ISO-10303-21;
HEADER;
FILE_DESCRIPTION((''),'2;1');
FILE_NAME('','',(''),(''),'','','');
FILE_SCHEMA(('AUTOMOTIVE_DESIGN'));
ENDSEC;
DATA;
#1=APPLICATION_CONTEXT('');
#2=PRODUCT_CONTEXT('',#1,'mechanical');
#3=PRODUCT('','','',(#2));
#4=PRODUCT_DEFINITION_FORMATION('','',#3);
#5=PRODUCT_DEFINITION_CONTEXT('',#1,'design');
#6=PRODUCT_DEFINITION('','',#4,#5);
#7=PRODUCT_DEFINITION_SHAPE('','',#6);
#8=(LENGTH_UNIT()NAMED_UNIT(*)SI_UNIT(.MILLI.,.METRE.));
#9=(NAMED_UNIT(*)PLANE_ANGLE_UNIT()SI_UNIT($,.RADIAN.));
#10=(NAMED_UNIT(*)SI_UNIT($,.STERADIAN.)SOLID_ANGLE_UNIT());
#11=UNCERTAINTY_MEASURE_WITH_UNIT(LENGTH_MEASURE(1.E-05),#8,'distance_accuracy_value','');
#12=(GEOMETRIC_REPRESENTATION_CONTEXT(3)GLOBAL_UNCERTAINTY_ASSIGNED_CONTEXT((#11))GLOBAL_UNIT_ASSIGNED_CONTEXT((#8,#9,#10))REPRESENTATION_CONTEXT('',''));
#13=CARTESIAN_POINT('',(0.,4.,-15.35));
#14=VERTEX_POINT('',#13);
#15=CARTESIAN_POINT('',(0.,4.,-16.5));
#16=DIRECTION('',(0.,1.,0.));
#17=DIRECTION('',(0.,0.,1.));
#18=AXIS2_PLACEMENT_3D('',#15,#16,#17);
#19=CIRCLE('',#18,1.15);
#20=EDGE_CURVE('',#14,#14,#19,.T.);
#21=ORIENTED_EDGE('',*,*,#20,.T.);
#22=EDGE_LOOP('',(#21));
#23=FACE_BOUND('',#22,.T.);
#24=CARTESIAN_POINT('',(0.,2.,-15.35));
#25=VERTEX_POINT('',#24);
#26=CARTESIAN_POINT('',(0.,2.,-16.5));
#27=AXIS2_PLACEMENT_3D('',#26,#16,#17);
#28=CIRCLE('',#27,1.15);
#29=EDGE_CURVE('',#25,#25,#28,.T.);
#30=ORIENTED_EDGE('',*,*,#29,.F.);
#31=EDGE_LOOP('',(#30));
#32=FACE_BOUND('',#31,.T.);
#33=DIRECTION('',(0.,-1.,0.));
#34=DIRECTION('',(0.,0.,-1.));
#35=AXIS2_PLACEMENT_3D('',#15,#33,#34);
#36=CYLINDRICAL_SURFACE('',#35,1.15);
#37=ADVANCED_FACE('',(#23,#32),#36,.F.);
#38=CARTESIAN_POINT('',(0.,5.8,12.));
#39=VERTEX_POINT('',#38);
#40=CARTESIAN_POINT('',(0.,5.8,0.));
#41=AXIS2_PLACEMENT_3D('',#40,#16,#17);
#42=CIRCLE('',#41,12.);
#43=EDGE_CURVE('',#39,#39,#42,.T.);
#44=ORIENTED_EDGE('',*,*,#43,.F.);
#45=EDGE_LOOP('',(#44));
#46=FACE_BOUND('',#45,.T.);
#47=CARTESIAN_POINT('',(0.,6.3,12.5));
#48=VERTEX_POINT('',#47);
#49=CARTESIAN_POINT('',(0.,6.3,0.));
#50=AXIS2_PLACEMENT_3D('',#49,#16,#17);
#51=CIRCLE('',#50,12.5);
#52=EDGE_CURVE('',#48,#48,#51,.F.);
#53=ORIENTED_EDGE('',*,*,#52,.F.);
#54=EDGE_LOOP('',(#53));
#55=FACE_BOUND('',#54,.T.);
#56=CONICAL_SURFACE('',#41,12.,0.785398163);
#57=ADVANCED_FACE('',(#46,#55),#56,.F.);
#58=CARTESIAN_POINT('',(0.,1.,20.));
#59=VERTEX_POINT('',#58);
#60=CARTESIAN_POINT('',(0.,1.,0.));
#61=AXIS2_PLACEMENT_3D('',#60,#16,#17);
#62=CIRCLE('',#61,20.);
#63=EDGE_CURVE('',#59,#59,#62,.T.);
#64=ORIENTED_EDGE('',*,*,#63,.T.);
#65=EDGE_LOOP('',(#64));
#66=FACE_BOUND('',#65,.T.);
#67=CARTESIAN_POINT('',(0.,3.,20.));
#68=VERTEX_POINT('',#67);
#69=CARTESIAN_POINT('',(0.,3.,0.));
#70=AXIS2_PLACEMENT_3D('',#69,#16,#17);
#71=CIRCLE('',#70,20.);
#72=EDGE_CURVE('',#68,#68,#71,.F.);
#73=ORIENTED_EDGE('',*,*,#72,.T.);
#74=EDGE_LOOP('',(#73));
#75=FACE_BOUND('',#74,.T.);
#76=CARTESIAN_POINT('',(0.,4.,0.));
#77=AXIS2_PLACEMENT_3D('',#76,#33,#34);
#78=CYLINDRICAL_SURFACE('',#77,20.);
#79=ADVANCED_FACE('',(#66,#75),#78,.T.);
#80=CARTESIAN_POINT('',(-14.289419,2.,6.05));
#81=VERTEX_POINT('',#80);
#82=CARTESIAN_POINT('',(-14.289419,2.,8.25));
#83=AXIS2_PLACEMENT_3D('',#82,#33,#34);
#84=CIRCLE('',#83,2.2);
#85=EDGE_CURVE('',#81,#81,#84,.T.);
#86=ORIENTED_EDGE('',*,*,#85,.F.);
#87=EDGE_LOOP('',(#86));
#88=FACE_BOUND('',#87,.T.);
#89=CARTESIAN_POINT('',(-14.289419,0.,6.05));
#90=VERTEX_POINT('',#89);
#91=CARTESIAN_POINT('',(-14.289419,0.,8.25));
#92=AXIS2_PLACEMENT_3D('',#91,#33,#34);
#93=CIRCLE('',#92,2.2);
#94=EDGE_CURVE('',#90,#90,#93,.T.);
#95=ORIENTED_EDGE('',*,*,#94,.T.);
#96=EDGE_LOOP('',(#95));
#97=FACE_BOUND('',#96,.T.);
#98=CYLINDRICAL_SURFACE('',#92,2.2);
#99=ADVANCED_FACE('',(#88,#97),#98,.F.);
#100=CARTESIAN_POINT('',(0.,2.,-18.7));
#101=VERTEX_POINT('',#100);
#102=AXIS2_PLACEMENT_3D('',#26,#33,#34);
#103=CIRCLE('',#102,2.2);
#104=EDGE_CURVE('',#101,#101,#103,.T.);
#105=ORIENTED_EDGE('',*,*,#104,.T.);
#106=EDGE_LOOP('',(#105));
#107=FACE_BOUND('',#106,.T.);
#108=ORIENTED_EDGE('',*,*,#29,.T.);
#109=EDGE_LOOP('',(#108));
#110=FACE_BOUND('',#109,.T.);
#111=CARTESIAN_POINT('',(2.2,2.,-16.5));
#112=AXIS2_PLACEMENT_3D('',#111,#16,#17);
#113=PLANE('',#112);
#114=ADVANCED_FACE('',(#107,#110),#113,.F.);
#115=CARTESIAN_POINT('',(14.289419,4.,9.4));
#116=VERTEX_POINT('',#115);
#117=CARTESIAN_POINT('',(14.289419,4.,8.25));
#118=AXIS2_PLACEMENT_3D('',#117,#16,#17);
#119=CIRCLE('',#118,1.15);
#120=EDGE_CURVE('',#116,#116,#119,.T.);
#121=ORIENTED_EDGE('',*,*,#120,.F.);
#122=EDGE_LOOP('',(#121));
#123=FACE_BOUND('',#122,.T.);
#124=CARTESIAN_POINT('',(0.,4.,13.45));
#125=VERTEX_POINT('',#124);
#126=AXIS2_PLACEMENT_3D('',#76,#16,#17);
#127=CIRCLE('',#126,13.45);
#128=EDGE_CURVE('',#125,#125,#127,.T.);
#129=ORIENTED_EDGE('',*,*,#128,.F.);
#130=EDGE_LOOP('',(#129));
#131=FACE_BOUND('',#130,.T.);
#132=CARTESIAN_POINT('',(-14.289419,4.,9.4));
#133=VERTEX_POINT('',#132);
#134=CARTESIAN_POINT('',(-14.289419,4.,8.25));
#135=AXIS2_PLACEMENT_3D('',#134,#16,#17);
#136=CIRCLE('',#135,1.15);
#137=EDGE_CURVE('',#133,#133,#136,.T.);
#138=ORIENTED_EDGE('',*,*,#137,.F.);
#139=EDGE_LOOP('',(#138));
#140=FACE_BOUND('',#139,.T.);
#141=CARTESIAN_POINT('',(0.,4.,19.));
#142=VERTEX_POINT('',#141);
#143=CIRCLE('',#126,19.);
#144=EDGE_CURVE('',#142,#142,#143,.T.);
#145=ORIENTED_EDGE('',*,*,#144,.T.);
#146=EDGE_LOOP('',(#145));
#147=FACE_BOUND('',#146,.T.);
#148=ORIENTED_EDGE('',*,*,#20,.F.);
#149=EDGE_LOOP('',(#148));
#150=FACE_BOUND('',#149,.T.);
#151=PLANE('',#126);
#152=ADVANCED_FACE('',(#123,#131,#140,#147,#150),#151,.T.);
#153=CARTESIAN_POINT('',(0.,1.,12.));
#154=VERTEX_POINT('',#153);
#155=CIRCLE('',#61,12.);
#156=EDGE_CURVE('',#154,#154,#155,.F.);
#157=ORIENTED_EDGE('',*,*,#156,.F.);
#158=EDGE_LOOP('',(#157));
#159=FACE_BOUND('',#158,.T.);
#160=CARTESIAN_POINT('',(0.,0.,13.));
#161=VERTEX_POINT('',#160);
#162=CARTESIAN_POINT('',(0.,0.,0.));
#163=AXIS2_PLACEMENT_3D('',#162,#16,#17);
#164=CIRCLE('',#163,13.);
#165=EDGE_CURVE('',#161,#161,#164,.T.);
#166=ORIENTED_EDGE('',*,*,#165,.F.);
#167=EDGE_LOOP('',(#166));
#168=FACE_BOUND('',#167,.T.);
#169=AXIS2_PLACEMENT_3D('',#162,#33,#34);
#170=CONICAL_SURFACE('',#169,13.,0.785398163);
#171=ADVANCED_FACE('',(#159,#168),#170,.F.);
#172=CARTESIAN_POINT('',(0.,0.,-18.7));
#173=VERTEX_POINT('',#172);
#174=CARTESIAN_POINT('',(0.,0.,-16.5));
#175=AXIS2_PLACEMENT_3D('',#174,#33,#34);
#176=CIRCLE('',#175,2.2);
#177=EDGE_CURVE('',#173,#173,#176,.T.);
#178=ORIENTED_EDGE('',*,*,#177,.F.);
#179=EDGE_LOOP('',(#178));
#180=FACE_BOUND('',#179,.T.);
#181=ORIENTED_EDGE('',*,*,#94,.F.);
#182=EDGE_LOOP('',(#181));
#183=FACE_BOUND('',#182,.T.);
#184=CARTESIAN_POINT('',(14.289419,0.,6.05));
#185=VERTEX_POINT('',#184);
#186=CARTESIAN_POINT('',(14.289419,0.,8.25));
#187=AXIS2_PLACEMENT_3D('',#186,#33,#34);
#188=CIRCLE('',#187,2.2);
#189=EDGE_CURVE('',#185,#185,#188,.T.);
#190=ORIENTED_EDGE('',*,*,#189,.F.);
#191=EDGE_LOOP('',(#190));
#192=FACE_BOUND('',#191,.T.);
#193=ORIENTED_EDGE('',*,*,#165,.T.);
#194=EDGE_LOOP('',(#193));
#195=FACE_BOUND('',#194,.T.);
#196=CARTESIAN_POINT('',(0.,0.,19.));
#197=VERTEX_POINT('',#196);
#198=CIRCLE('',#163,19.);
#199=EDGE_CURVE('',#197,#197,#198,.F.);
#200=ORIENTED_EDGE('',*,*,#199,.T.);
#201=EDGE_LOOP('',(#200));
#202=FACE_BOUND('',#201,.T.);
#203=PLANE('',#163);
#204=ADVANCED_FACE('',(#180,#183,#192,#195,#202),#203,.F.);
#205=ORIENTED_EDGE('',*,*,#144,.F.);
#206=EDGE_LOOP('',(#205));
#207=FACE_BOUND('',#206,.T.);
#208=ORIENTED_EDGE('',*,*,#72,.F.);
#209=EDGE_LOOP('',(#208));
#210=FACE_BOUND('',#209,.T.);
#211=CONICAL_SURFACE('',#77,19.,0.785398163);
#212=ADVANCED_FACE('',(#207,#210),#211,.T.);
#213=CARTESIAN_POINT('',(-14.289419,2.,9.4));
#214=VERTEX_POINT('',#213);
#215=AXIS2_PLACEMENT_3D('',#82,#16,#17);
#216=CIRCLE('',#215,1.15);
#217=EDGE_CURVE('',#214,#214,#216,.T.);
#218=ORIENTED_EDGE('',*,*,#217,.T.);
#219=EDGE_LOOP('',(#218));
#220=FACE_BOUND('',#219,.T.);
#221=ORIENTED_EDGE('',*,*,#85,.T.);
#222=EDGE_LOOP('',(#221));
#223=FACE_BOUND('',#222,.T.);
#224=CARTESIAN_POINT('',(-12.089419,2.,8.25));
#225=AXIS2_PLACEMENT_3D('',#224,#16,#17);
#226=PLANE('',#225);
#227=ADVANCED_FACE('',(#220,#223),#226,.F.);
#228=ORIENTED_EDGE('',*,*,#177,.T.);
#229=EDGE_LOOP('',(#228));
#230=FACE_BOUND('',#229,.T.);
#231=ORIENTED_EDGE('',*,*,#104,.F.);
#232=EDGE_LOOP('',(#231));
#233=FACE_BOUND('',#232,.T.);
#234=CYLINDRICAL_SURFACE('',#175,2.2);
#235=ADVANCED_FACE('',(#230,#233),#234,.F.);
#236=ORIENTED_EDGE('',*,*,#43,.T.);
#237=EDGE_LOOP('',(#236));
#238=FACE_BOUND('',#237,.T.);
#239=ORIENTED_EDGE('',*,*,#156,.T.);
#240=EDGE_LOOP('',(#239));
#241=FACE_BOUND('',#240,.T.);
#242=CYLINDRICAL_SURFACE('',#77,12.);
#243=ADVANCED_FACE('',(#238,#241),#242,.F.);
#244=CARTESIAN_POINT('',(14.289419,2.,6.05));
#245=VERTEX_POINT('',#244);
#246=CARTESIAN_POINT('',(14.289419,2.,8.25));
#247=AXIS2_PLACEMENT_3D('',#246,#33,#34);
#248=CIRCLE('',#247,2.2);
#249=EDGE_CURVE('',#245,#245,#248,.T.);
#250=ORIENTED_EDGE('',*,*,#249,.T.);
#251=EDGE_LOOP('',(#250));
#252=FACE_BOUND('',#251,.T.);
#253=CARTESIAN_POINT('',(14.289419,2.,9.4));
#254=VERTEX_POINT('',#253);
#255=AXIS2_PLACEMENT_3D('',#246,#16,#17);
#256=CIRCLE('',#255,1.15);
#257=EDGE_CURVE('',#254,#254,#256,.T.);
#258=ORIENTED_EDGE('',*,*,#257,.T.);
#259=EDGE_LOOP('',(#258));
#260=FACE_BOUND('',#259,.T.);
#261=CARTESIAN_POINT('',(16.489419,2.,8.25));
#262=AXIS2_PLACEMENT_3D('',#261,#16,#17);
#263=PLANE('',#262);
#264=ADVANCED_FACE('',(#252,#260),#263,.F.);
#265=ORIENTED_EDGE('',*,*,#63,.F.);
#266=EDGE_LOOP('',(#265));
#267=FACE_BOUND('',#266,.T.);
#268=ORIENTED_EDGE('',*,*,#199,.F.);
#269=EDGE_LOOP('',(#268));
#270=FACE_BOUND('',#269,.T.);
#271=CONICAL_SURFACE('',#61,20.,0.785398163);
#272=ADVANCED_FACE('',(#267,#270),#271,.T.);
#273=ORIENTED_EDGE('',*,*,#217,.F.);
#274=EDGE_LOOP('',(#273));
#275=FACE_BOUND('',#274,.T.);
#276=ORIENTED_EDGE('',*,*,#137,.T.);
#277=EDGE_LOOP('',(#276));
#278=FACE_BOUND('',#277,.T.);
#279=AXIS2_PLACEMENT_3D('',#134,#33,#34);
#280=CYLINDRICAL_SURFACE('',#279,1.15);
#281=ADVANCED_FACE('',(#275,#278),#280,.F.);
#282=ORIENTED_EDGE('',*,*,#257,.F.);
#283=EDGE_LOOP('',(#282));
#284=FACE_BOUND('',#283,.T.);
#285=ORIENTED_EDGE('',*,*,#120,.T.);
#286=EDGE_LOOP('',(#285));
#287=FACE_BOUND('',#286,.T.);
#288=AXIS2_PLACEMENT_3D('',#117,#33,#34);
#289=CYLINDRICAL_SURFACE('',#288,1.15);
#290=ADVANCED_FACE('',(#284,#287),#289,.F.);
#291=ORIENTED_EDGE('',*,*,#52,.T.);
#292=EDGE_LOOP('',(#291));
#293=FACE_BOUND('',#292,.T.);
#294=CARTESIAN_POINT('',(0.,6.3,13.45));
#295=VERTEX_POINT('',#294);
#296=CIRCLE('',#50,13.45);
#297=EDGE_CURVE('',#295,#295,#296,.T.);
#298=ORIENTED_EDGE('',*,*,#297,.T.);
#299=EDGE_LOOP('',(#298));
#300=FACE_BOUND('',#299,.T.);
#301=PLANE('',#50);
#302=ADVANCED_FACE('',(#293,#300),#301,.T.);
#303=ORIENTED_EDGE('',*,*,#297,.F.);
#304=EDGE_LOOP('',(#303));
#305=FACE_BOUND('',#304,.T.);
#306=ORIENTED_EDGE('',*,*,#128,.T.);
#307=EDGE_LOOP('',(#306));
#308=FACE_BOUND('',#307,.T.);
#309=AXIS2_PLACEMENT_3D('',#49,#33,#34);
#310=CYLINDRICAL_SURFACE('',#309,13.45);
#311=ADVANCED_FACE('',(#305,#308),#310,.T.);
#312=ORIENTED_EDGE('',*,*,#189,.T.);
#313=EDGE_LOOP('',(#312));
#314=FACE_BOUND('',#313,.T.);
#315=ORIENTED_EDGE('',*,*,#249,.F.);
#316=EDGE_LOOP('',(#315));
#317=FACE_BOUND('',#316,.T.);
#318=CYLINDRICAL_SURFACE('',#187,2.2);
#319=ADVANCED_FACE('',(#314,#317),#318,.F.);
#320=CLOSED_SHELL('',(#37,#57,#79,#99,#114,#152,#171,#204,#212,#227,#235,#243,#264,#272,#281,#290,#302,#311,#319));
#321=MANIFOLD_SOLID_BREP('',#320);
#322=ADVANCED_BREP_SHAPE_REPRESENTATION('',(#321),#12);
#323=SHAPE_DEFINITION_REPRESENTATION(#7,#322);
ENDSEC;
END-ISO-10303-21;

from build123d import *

# Parameters (mm, degrees)
ESQUISSE1_R                = 20
ESQUISSE1_R_2              = 12
ESQUISSE1_R_3              = 1.15
BOSS_EXTRU_1_DEPTH         = 4
PER_AGEAVANC_1_OUTLINE_R   = 2.2
PER_AGEAVANC_1_OUTLINE_R_2 = 1.15
PER_AGEAVANC_1_DEPTH       = 2
BOSS_EXTRU_2_START         = -4
ESQUISSE3_R                = 13.45
ESQUISSE3_R_2              = 12
BOSS_EXTRU_2_DEPTH         = 2.3
CHANFREIN1_SIZE            = 0.5
CHANFREIN2_SIZE            = 1


# Read off the part's stored shape, not the designer's step: PerçageAvancé1
with BuildPart() as part:
    # Esquisse1 → Boss.-Extru.1 (new body)
    with BuildSketch(Plane(origin=(0, 0, 0), x_dir=(1, 0, 0), z_dir=(0, 1, 0))):
        with Locations(Location((0, 0, 0), (0, 0, 270))):
            Circle(ESQUISSE1_R)
        with Locations(Location((0, 0, 0), (0, 0, 270))):
            Circle(ESQUISSE1_R_2, mode=Mode.SUBTRACT)
        with Locations(Location((-14.289419162, -8.25, 0), (0, 0, 270))):
            Circle(ESQUISSE1_R_3, mode=Mode.SUBTRACT)
        with Locations(Location((14.289419162, -8.25, 0), (0, 0, 270))):
            Circle(ESQUISSE1_R_3, mode=Mode.SUBTRACT)
        with Locations(Location((0, 16.5, 0), (0, 0, 270))):
            Circle(ESQUISSE1_R_3, mode=Mode.SUBTRACT)
    extrude(amount=BOSS_EXTRU_1_DEPTH)

    # PerçageAvancé1 outline → PerçageAvancé1 (cut)
    # profile 1 of 3: a face of its own
    with BuildSketch(Plane(origin=(0, 0, 0), x_dir=(1, 0, 0), z_dir=(0, 1, 0))):
        with Locations((-14.289419162, -8.25)):
            Circle(PER_AGEAVANC_1_OUTLINE_R)
        with Locations((-14.289419162, -8.25)):
            Circle(PER_AGEAVANC_1_OUTLINE_R_2, mode=Mode.SUBTRACT)
    # profile 2 of 3: a face of its own
    with BuildSketch(Plane(origin=(0, 0, 0), x_dir=(1, 0, 0), z_dir=(0, 1, 0))):
        with Locations((14.289419162, -8.25)):
            Circle(PER_AGEAVANC_1_OUTLINE_R)
        with Locations((14.289419162, -8.25)):
            Circle(PER_AGEAVANC_1_OUTLINE_R_2, mode=Mode.SUBTRACT)
    # profile 3 of 3: a face of its own
    with BuildSketch(Plane(origin=(0, 0, 0), x_dir=(1, 0, 0), z_dir=(0, 1, 0))):
        with Locations((0, 16.5)):
            Circle(PER_AGEAVANC_1_OUTLINE_R)
        with Locations((0, 16.5)):
            Circle(PER_AGEAVANC_1_OUTLINE_R_2, mode=Mode.SUBTRACT)
    extrude(amount=PER_AGEAVANC_1_DEPTH, mode=Mode.SUBTRACT)

    # Esquisse3 → Boss.-Extru.2 (add)
    with BuildSketch(Plane.XZ.offset(BOSS_EXTRU_2_START)):
        with Locations(Location((0, 0, 0), (0, 0, 90))):
            Circle(ESQUISSE3_R)
        with Locations(Location((0, 0, 0), (0, 0, 90))):
            Circle(ESQUISSE3_R_2, mode=Mode.SUBTRACT)
    extrude(amount=-BOSS_EXTRU_2_DEPTH)

    # Chanfrein1
    chanfrein1_edges = [part.edges().sort_by_distance(p)[0] for p in [
        (0, 6.3, -12),
    ]]
    chamfer(chanfrein1_edges, length=CHANFREIN1_SIZE)

    # Chanfrein2
    chanfrein2_edges = [part.edges().sort_by_distance(p)[0] for p in [
        (0, 4, -20),
        (0, 0, -20),
        (0, 0, -12),
    ]]
    chamfer(chanfrein2_edges, length=CHANFREIN2_SIZE)


solid = part.part
